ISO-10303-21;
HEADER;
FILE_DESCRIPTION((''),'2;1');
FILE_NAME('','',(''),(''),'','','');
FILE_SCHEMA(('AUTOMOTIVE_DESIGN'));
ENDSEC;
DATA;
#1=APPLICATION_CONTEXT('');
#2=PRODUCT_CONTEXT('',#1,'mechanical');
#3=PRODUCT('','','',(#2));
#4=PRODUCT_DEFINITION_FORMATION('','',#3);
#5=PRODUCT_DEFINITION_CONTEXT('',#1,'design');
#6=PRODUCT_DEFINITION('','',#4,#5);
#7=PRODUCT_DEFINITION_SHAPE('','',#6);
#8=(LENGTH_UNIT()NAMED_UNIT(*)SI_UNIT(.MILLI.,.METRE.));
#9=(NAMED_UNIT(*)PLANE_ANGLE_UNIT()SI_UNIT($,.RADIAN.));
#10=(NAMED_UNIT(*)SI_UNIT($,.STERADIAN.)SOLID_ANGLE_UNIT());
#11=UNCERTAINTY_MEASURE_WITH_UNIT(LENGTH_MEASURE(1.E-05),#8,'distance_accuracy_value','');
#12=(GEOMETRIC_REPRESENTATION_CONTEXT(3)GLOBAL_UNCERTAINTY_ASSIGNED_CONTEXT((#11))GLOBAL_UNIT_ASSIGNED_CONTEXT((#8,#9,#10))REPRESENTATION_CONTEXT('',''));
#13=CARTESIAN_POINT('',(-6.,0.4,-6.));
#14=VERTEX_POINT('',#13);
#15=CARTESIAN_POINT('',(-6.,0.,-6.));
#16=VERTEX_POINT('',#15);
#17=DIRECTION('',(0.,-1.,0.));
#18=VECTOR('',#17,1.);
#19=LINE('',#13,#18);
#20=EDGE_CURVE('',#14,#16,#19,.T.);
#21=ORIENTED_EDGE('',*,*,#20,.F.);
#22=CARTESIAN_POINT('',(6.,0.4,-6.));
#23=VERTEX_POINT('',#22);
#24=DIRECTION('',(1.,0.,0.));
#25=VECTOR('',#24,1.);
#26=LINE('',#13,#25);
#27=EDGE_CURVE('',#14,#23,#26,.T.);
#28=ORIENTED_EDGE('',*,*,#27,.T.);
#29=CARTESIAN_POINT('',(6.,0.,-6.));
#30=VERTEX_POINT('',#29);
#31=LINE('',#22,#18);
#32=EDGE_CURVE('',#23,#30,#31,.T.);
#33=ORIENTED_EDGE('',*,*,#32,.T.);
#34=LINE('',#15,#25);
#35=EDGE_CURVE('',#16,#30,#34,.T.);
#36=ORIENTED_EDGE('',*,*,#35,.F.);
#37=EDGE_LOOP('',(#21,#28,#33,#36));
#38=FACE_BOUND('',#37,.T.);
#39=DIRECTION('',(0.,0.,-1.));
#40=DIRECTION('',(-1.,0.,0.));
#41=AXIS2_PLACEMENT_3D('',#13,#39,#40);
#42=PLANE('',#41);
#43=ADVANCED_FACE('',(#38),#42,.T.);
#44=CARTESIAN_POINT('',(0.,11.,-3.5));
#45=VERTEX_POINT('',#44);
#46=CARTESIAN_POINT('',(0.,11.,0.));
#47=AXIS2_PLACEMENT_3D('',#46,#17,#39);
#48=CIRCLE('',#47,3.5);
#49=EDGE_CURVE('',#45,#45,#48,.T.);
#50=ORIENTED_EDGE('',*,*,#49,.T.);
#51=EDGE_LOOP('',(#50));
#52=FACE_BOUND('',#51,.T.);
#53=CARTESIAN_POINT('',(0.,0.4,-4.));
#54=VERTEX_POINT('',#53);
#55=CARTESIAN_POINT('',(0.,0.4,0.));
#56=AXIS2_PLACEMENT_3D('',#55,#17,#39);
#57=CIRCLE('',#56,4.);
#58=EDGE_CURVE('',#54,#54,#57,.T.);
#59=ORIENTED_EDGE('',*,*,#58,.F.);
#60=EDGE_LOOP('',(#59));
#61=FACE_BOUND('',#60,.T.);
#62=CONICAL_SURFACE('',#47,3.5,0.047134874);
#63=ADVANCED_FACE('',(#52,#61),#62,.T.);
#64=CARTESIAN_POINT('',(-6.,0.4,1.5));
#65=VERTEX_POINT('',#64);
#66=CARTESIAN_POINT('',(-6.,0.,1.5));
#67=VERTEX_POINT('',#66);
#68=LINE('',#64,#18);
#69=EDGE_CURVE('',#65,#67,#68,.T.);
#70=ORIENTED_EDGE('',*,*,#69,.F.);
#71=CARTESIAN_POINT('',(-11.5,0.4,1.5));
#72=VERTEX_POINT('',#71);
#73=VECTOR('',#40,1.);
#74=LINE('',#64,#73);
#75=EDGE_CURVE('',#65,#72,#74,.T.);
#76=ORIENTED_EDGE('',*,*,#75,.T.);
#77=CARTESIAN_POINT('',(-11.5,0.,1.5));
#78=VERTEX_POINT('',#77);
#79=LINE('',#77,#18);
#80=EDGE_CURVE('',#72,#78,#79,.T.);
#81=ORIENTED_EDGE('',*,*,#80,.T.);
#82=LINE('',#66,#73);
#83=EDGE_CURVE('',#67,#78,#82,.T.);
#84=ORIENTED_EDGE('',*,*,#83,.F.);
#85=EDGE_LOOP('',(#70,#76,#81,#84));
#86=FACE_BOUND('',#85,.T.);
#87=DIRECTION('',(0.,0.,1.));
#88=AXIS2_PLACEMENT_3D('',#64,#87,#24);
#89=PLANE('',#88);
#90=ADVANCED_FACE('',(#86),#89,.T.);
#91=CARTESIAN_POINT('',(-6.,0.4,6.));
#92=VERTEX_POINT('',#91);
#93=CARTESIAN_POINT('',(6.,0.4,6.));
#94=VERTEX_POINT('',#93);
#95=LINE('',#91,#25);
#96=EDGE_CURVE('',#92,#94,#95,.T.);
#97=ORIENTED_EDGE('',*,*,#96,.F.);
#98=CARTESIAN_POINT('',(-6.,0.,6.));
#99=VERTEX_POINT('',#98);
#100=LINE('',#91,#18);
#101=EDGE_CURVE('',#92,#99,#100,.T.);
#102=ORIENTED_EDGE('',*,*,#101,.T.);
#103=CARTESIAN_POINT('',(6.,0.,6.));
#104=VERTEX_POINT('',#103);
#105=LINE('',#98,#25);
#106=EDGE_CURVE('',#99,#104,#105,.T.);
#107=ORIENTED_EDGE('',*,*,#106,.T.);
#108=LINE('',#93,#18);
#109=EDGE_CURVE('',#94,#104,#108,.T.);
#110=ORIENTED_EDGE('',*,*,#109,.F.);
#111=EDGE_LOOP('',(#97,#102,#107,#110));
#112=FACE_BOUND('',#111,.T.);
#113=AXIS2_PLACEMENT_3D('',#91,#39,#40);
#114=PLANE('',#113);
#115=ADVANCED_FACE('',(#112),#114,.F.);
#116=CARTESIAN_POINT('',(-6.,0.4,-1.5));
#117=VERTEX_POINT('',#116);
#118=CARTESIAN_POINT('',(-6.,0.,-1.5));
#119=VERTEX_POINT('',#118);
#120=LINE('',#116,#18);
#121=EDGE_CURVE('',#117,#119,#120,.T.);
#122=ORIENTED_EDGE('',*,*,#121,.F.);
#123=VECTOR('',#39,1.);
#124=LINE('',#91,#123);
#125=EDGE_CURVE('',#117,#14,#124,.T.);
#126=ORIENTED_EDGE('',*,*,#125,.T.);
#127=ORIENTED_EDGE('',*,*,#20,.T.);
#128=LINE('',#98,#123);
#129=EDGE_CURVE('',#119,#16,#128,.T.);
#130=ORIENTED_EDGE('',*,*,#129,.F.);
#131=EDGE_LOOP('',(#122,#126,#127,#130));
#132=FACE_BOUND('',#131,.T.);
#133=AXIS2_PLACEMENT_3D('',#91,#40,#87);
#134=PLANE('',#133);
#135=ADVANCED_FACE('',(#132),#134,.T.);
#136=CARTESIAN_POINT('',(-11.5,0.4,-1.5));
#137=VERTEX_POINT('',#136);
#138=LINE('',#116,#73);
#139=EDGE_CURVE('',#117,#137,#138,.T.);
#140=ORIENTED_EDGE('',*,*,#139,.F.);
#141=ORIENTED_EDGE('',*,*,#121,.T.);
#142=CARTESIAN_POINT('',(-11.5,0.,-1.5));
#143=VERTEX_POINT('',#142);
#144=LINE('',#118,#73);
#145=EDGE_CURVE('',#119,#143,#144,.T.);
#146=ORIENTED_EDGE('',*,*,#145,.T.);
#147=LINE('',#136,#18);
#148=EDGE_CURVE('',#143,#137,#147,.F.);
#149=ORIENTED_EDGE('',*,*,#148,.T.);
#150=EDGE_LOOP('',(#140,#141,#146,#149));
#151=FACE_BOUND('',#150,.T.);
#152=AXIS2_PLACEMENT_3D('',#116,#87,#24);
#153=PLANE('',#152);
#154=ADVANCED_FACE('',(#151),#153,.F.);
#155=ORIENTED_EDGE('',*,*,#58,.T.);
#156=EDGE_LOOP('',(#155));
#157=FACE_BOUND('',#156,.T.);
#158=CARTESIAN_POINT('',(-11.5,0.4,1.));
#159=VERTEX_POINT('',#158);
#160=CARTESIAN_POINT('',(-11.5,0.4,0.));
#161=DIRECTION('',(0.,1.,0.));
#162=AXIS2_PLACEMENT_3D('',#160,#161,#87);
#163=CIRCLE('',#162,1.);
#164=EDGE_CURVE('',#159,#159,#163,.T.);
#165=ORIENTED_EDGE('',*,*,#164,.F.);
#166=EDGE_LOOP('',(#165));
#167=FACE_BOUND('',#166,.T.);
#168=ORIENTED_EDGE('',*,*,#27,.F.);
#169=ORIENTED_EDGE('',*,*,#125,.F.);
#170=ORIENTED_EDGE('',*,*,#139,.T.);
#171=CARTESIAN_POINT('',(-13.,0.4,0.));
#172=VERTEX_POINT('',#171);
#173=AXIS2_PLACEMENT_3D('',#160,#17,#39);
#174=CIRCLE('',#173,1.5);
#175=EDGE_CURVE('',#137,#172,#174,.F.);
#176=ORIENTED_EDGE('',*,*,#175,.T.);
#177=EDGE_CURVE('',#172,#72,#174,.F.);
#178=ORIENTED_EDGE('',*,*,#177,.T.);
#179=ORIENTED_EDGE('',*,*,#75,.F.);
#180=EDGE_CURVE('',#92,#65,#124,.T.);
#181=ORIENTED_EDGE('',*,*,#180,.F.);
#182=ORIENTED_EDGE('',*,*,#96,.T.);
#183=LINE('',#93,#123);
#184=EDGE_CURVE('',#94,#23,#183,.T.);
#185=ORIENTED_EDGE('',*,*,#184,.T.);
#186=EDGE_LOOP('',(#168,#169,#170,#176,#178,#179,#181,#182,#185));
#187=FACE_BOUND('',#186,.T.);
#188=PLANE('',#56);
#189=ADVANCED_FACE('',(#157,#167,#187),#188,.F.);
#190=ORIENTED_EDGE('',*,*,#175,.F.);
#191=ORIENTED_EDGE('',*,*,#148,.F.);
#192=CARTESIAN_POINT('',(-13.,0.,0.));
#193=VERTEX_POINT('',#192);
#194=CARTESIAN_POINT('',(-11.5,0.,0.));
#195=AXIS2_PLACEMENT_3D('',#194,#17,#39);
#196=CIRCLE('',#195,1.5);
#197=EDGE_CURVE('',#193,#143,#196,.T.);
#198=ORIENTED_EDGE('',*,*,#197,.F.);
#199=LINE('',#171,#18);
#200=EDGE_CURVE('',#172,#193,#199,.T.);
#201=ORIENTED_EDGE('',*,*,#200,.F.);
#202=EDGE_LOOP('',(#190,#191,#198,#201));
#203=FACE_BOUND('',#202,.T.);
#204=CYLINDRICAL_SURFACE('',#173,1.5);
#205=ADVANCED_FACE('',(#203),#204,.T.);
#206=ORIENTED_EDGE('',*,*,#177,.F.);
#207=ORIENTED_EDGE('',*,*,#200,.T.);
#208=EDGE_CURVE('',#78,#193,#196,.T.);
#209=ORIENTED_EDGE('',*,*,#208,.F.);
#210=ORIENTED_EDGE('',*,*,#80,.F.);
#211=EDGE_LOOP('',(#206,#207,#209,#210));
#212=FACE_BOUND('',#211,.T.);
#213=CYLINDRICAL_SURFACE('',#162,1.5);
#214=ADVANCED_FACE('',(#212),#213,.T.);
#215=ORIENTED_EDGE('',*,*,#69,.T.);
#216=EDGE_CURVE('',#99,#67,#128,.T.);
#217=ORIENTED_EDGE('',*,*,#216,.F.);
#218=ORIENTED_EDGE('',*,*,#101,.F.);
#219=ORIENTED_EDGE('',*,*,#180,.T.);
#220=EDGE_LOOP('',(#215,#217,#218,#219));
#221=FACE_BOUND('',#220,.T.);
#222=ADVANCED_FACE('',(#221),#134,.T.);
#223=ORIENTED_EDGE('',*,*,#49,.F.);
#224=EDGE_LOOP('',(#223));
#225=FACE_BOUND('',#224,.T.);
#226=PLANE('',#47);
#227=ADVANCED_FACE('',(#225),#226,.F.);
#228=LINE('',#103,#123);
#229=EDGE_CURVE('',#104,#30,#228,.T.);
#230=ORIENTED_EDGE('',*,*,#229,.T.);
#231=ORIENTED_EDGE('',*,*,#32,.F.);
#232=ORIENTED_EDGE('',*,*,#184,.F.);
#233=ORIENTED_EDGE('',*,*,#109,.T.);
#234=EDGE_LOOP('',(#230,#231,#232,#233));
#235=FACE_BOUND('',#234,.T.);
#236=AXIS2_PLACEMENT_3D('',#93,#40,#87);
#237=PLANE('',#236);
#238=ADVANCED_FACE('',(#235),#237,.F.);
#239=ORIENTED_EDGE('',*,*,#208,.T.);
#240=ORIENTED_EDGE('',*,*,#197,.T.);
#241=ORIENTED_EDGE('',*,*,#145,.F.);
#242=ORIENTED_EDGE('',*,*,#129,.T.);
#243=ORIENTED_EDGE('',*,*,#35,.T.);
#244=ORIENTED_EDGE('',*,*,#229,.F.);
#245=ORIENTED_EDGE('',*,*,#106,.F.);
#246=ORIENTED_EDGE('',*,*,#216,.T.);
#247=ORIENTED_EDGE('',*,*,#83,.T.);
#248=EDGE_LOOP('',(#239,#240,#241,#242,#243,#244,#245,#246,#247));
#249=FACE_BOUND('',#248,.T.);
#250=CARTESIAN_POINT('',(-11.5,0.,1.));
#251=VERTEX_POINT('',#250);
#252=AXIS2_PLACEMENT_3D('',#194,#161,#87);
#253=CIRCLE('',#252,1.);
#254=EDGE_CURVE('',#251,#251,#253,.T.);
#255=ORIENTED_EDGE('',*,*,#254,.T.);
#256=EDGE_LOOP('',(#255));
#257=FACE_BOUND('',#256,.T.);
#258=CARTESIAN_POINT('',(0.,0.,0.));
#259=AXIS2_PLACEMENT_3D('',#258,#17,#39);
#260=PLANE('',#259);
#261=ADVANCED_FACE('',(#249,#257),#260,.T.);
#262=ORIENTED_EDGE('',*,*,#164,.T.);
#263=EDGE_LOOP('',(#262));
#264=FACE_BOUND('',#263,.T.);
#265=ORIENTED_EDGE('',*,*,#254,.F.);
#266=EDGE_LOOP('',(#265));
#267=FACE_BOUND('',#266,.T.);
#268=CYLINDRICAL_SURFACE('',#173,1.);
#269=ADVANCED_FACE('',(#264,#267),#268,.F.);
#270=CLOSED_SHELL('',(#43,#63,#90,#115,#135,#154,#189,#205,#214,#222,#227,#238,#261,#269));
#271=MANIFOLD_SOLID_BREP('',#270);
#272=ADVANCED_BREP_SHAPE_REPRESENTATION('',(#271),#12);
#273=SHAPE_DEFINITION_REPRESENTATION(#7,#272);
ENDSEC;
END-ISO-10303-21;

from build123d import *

# Parameters (mm, degrees)
SKETCH_1_W      = 12
SKETCH_1_H      = 12
SKETCH_1_W_2    = 7
SKETCH_1_H_2    = 3
SKETCH_1_R      = 1
EXTRUDE_1_DEPTH = 0.4
EXTRUDE_START   = 0.4
SKETCH_1_5_R    = 3.5
EXTRUDE_2_DEPTH = 10.6
SKETCH_1_6_R    = 4
EXTRUDE_3_DEPTH = 0.01
FILLET_1_R      = 1.5


with BuildPart() as part:
    # 草图1 → 凸台-拉伸1 (new body)
    # profile 1 of 2: a face of its own
    with BuildSketch(Plane(origin=(0, 0, 0), x_dir=(1, 0, 0), z_dir=(0, 1, 0))):
        Rectangle(SKETCH_1_W, SKETCH_1_H)
    # profile 2 of 2: a face of its own
    with BuildSketch(Plane(origin=(0, 0, 0), x_dir=(1, 0, 0), z_dir=(0, 1, 0))):
        with Locations((-9.5, 0)):
            Rectangle(SKETCH_1_W_2, SKETCH_1_H_2)
        with Locations(Location((-11.5, 0, 0), (0, 0, 270))):
            Circle(SKETCH_1_R, mode=Mode.SUBTRACT)
    extrude(amount=EXTRUDE_1_DEPTH)

    # 草图1<5> → 凸台-拉伸2 (add)
    with BuildSketch(Plane(origin=(0, 0, 0), x_dir=(1, 0, 0), z_dir=(0, 1, 0)).offset(EXTRUDE_START)):
        with Locations(Location((0, 0, 0), (0, 0, 90))):
            Circle(SKETCH_1_5_R)
    extrude(amount=EXTRUDE_2_DEPTH)

    # 草图1<6> → 凸台-拉伸3 (add)
    with BuildSketch(Plane(origin=(0, 0, 0), x_dir=(1, 0, 0), z_dir=(0, 1, 0)).offset(EXTRUDE_START)):
        with Locations(Location((0, 0, 0), (0, 0, 90))):
            Circle(SKETCH_1_6_R)
    extrude(amount=EXTRUDE_3_DEPTH)

    # loft up to a face of the part (loft_1)
    loft([Face(Wire([part.edges().sort_by_distance((-2.551390196, 11, 2.395914871))[0]])), Face(Wire([part.edges().sort_by_distance((-2.91587451, 0.4, 2.738188424))[0]]))])

    # 圆角1
    fillet_1_edges = [part.edges().sort_by_distance(p)[0] for p in [
        (-13, 0.2, 1.5),
        (-13, 0.2, -1.5),
    ]]
    fillet(fillet_1_edges, radius=FILLET_1_R - 0.0001)  # a hair under: the kernel refuses the full size


solid = part.part
